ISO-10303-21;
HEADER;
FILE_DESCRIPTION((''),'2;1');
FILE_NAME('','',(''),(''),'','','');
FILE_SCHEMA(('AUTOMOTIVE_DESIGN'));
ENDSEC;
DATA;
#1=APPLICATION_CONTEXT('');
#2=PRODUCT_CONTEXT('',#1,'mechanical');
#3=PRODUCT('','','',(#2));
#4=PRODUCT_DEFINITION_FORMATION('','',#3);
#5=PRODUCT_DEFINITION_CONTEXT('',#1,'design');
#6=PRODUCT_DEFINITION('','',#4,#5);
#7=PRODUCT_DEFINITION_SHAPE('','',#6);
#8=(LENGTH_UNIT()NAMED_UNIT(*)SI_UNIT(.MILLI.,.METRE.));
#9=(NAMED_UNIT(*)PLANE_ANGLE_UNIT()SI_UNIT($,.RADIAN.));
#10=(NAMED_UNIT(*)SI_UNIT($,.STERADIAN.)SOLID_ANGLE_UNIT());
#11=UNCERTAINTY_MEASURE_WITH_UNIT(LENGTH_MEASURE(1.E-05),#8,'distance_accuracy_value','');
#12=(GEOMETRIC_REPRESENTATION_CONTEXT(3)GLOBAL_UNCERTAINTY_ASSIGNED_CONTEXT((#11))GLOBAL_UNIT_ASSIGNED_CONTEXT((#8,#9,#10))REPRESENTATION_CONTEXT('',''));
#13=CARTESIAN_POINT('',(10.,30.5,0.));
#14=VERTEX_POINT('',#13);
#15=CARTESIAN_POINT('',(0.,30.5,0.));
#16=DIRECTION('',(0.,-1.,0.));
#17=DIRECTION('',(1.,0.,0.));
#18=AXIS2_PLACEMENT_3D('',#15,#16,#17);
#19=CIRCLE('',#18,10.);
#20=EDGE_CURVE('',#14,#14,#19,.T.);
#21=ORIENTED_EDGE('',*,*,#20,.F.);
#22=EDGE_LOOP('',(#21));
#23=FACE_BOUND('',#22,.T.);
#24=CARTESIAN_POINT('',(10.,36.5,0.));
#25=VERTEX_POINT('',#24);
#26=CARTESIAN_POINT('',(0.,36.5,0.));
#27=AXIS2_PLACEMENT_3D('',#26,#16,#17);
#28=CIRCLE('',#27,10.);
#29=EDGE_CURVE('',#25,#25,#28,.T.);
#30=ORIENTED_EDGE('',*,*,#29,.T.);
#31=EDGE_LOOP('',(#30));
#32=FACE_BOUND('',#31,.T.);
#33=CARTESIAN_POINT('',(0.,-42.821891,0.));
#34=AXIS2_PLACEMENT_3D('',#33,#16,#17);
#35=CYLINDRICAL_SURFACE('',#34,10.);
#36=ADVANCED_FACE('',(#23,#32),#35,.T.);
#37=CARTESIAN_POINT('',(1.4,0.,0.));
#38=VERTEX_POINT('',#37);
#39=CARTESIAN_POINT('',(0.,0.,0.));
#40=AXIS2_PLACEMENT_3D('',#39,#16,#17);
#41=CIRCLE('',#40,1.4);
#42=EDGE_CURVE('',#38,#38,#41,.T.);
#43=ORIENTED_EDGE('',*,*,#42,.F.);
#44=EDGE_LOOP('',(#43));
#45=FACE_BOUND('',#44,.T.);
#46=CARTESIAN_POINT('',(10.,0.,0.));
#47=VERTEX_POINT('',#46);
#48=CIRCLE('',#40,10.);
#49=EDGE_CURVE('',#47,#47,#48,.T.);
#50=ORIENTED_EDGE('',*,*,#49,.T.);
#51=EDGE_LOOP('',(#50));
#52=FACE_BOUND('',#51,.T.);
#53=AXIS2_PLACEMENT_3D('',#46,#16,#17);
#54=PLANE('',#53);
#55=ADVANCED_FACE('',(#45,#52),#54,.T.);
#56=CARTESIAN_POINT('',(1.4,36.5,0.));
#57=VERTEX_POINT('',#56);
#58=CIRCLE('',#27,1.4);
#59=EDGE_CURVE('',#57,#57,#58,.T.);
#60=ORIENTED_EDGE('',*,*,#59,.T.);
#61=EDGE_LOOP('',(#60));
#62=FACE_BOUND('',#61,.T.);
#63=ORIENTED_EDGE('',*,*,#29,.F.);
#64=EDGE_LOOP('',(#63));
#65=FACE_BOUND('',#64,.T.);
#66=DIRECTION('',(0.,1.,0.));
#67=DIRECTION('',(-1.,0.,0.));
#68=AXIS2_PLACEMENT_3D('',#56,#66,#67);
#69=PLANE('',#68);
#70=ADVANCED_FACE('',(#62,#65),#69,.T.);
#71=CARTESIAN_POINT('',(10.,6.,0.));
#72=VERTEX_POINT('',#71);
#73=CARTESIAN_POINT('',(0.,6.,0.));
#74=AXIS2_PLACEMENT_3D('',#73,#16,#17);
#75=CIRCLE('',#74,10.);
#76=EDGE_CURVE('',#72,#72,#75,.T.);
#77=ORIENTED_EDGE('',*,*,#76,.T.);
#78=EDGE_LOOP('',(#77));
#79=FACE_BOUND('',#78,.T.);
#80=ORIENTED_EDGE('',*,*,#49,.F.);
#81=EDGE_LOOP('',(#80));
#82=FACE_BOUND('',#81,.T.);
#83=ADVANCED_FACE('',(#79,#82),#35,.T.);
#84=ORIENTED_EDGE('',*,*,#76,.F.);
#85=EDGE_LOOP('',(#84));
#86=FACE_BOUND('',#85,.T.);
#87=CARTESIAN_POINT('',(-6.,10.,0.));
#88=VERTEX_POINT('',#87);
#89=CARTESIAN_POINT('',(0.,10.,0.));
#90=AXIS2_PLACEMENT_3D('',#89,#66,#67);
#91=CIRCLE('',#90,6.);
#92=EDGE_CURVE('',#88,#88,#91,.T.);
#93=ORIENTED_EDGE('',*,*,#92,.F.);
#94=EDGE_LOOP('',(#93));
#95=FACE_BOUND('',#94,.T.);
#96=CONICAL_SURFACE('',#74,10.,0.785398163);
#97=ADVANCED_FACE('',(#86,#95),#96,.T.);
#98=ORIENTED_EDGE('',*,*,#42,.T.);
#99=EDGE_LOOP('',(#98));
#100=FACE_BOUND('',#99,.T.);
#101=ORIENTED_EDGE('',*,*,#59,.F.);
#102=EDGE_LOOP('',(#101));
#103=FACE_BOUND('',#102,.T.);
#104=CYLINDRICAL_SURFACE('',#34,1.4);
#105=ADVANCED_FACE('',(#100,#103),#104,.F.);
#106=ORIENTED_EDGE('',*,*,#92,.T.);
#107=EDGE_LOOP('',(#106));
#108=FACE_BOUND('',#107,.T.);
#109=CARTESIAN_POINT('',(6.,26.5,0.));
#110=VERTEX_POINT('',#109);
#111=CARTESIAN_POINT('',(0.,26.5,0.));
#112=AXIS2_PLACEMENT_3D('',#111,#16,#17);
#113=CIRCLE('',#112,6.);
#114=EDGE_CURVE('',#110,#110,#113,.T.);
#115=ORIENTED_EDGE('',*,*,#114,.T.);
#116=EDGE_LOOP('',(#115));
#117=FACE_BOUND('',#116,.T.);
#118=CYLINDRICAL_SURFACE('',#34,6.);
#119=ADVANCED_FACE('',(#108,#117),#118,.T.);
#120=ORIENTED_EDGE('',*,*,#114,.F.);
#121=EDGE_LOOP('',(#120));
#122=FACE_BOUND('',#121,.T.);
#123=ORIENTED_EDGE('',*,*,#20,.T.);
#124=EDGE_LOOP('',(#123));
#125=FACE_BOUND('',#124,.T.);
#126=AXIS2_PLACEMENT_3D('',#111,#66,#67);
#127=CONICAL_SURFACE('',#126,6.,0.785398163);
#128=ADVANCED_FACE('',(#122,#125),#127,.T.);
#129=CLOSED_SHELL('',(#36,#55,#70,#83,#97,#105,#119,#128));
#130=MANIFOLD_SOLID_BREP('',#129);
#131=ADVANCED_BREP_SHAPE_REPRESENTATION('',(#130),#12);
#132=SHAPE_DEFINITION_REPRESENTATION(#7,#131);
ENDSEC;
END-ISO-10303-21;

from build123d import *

# Parameters (mm, degrees)
CHAMFER1_SIZE = 4


with BuildPart() as part:
    # Sketch1 → Revolve1 (revolve)
    with BuildSketch(Plane.XY):
        Polygon((1.4, 0), (1.4, 36.5), (10, 36.5), (10, 30.5), (6, 30.5), (6, 6), (10, 6), (10, 0), align=None)
    revolve(axis=Axis((0, -42.821890518, 0), (0, 1, 0)))

    # Chamfer1
    chamfer1_edges = [part.edges().sort_by_distance(p)[0] for p in [
        (-6, 6, 0),
        (-6, 30.5, 0),
    ]]
    chamfer(chamfer1_edges, length=CHAMFER1_SIZE - 0.0001)  # a hair under: the kernel refuses the full size


solid = part.part
